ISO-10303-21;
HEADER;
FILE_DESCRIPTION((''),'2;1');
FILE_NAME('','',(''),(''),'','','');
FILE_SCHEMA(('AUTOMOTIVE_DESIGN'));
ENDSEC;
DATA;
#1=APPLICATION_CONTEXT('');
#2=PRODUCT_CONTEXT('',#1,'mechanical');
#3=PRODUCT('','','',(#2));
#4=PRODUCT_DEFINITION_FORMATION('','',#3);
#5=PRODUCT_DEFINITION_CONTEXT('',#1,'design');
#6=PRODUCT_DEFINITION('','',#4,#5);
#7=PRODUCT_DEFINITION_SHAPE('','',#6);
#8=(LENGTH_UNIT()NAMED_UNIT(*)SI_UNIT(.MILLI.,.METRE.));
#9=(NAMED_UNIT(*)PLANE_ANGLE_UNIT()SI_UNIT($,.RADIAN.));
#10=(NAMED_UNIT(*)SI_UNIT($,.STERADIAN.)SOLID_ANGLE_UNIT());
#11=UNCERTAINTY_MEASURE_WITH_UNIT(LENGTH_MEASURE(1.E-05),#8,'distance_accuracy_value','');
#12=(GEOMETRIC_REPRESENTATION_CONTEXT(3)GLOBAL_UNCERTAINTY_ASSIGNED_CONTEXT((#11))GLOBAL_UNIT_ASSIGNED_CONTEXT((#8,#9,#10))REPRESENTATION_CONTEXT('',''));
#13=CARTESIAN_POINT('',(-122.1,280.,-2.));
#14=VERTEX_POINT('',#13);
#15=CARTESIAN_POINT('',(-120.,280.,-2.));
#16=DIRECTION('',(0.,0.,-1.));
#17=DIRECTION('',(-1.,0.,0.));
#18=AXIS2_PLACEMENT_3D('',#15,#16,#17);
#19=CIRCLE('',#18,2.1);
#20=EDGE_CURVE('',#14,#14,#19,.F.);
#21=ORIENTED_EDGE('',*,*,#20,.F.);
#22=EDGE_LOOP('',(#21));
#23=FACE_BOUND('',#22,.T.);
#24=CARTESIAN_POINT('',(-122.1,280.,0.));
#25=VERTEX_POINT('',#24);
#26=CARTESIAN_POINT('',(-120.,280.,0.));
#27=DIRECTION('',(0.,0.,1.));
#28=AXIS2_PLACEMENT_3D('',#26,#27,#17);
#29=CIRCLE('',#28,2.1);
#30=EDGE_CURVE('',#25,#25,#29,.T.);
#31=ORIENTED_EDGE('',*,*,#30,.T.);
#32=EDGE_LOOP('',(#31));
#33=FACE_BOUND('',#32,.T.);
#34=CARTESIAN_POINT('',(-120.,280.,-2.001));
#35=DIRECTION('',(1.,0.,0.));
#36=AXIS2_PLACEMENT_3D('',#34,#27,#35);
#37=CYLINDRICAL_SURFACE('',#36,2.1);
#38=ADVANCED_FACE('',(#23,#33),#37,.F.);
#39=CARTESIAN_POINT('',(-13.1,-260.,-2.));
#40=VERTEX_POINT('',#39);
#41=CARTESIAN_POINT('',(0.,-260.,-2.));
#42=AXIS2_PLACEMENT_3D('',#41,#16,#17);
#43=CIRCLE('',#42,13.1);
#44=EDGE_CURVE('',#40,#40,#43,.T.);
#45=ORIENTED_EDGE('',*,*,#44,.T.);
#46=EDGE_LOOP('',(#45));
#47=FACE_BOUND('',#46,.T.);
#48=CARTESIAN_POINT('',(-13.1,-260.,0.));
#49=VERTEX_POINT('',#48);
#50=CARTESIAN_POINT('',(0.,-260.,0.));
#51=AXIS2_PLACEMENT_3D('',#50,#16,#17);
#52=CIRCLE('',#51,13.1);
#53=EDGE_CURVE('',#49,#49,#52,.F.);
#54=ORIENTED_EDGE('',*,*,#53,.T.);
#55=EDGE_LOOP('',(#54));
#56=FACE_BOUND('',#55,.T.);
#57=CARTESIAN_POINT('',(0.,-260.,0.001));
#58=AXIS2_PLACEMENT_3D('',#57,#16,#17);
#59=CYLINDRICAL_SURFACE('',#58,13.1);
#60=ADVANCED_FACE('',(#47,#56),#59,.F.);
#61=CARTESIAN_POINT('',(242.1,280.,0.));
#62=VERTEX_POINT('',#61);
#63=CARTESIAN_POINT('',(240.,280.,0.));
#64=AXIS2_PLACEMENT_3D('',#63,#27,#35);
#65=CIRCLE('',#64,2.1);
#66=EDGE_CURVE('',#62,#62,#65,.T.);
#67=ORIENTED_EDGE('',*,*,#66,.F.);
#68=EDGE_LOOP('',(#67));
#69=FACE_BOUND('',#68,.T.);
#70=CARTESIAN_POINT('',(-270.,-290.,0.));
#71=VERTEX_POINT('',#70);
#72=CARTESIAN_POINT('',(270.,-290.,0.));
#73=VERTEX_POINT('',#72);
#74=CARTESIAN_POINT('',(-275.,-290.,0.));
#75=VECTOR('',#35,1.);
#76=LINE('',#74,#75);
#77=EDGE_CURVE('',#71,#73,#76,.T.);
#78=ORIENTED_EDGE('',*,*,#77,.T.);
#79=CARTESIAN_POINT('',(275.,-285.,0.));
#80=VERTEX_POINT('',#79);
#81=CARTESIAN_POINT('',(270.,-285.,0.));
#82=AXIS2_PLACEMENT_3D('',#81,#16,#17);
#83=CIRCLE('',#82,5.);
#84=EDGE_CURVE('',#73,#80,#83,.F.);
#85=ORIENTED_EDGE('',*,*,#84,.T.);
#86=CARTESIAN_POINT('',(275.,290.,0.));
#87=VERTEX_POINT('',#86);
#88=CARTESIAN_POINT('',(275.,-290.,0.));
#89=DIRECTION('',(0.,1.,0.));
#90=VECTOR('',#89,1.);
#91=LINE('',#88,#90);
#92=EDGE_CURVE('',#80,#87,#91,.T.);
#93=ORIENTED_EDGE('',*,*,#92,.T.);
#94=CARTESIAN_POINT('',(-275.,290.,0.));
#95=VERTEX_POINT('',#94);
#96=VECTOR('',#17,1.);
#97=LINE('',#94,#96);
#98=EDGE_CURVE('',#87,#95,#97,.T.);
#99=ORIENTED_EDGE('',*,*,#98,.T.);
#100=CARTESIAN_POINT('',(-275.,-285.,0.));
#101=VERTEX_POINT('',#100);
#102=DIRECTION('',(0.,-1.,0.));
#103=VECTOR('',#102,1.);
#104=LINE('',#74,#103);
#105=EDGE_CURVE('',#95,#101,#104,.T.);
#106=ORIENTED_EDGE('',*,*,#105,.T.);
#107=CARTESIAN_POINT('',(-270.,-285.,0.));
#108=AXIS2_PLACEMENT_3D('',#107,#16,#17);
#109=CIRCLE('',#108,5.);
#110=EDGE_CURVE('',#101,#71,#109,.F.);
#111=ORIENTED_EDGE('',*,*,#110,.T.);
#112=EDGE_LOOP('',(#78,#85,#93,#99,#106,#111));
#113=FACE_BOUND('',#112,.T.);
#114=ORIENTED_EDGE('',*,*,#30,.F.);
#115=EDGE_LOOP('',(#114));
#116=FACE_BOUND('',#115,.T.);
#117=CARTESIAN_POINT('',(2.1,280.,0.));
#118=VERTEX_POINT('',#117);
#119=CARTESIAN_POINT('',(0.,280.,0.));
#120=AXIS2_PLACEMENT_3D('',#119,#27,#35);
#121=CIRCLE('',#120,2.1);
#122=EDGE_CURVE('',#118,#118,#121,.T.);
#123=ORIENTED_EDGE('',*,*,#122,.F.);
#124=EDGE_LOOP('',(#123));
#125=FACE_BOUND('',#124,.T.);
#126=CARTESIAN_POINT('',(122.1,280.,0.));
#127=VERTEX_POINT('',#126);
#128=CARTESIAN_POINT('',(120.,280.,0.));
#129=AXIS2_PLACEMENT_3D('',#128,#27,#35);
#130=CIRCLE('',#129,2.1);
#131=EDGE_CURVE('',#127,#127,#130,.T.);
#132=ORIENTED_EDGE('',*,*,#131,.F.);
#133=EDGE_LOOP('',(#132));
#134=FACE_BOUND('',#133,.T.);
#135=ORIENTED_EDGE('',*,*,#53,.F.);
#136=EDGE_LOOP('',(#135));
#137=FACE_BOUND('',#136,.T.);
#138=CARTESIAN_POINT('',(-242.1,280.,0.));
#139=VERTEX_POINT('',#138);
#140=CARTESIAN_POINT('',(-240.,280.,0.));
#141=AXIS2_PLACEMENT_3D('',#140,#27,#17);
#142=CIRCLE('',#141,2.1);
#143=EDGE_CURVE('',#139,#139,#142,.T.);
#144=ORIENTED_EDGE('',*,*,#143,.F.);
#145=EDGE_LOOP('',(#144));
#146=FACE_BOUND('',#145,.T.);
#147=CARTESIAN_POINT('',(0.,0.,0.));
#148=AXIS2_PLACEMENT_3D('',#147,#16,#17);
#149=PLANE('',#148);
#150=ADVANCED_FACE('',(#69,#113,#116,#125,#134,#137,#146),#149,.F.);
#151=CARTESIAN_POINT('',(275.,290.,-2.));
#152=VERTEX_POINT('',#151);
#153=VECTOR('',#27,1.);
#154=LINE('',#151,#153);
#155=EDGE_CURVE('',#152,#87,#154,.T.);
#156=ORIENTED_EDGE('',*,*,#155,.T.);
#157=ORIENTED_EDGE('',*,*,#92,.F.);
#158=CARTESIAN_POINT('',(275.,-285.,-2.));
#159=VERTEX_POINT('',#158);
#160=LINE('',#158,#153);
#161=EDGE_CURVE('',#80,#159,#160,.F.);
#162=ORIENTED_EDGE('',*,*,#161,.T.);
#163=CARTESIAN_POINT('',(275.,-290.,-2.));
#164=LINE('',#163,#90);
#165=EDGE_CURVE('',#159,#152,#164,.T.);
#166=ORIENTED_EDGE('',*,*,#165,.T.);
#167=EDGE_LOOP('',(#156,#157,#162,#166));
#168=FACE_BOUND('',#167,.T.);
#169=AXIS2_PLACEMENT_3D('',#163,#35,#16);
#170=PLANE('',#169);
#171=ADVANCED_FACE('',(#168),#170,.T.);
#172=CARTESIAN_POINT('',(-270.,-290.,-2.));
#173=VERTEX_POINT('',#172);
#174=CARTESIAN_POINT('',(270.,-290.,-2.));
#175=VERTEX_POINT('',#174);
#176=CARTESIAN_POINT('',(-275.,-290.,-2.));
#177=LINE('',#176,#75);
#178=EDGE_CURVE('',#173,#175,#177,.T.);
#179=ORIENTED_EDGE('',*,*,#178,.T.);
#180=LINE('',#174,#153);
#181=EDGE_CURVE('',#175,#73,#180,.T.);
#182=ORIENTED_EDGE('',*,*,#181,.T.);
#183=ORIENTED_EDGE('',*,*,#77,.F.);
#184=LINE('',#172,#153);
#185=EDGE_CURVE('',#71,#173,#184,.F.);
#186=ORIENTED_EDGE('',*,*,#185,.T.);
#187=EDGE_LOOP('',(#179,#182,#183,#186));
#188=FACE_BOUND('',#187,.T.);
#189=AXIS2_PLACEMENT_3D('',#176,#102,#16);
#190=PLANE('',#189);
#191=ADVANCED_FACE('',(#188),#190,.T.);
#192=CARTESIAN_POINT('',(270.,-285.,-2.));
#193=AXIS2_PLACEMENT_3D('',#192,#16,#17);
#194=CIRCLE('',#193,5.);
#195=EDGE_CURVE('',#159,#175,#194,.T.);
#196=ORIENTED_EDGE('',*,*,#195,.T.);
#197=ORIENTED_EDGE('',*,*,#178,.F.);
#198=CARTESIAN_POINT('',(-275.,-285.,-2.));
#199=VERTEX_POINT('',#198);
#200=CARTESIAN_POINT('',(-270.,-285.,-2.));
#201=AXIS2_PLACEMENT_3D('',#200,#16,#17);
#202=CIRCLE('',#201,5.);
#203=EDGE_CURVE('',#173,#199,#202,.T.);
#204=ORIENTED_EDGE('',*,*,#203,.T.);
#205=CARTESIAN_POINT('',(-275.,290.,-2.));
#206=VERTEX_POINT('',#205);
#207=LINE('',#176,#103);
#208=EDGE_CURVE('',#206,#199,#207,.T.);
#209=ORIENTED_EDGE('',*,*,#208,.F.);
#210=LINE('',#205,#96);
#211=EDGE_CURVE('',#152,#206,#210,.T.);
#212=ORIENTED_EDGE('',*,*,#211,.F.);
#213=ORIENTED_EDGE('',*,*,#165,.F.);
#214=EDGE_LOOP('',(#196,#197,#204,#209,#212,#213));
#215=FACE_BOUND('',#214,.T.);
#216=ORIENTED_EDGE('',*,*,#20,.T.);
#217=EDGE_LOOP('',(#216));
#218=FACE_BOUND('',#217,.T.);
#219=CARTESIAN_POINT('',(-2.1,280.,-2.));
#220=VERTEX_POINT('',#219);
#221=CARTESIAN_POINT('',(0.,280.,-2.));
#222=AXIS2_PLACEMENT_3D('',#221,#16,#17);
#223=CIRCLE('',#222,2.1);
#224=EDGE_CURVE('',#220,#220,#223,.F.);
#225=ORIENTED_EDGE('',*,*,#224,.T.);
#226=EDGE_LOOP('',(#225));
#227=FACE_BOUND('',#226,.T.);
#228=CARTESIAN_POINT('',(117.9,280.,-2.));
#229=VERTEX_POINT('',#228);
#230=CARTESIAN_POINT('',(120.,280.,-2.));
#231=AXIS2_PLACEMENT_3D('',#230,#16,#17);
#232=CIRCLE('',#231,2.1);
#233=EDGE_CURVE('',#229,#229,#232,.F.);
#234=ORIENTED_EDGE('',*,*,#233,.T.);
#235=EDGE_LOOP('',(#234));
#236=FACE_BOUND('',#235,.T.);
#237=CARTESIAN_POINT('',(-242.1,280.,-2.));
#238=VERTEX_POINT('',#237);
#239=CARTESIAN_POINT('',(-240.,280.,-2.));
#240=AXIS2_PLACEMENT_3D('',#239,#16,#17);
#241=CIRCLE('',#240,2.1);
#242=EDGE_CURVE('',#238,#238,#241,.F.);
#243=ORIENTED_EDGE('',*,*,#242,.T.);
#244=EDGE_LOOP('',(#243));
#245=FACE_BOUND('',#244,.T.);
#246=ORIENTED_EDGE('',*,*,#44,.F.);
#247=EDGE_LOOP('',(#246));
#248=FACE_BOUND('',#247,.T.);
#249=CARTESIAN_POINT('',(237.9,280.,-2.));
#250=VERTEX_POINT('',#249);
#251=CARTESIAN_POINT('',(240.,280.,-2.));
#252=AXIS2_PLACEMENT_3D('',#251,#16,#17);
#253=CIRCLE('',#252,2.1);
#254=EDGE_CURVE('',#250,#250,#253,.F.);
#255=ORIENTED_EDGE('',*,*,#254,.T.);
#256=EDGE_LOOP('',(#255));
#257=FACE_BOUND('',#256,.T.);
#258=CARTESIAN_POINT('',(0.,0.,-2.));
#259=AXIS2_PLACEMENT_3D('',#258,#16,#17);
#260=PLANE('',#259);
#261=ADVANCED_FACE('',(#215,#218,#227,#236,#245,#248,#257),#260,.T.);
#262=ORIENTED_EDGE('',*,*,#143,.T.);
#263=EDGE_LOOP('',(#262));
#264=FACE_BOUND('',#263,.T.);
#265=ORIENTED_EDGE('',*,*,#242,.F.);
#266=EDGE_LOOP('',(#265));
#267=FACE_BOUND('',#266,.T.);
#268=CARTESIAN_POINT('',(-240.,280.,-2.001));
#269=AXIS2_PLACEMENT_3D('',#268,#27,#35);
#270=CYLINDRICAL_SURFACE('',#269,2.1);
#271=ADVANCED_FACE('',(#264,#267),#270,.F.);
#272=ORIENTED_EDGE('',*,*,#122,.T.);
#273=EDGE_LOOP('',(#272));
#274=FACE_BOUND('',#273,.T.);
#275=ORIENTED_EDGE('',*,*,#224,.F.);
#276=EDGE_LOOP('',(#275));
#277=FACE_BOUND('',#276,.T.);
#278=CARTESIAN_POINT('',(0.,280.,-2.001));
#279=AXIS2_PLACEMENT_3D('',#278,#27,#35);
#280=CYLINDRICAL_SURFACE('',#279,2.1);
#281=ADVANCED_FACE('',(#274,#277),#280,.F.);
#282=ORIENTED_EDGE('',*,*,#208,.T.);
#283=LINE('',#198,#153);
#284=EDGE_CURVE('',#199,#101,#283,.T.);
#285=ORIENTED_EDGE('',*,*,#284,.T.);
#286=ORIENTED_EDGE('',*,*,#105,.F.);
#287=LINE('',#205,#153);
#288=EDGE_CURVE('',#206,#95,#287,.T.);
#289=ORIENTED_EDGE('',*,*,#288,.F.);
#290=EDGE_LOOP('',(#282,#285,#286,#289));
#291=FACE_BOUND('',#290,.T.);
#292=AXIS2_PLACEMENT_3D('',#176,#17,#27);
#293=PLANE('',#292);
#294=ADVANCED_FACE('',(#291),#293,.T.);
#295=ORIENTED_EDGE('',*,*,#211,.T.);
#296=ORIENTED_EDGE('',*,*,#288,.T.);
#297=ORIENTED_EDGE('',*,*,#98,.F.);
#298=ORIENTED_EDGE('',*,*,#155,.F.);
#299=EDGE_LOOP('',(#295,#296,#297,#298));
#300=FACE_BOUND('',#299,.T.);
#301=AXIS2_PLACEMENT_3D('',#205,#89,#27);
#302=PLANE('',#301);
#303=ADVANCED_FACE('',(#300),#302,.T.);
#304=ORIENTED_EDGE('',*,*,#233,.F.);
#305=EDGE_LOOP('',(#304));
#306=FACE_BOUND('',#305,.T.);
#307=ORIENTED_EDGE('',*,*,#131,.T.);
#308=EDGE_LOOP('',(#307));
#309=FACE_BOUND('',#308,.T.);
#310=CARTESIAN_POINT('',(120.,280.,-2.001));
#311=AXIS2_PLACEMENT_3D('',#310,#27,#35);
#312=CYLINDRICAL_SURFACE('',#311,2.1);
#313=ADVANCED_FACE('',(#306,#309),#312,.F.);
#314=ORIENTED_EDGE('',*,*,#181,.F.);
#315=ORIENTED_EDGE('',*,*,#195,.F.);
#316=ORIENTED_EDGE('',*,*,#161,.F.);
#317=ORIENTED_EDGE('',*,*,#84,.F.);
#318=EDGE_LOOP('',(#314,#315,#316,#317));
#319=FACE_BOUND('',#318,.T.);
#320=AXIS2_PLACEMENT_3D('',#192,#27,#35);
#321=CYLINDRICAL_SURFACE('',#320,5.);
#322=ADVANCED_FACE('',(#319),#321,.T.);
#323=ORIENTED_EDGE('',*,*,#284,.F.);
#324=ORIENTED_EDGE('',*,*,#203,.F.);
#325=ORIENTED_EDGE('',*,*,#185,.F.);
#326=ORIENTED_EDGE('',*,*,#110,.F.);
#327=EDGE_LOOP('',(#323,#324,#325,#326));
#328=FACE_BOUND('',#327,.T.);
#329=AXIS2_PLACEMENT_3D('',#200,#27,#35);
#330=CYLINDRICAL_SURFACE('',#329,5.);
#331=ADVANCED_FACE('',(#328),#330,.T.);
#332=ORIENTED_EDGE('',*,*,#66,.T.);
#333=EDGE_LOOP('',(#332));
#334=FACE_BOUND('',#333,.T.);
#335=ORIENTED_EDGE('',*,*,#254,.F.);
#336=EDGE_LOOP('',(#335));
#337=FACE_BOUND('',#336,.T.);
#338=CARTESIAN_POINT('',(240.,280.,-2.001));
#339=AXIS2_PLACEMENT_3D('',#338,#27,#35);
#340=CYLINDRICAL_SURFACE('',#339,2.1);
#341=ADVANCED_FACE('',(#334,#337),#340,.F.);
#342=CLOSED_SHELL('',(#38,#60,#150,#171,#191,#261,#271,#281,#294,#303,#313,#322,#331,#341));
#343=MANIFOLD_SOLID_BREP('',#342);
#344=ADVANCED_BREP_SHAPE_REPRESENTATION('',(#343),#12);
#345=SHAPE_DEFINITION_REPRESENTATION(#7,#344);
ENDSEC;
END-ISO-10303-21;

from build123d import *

# Parameters (mm, degrees)
SZKIC1_W                   = 550
SZKIC1_H                   = 580
ODGI_CIE_BAZOWE1_DEPTH     = 2
ZAOKR_GLENIE1_R            = 5
WYTNIJ_WYCI_GNI_CIE2_REACH = 401.661
SZKIC3_R                   = 2.1
WYTNIJ_WYCI_GNI_CIE3_REACH = 401.661
SZKIC4_R                   = 13.1


# Sheet-metal steps are written as plain solids
with BuildPart() as part:
    # Szkic1 → Odgięcie bazowe1 (new body)
    with BuildSketch(Plane.XY):
        Rectangle(SZKIC1_W, SZKIC1_H)
    extrude(amount=-ODGI_CIE_BAZOWE1_DEPTH)

    # Zaokrąglenie1
    zaokr_glenie1_edges = [part.edges().sort_by_distance(p)[0] for p in [
        (275, -290, -1),
        (-275, -290, -1),
    ]]
    fillet(zaokr_glenie1_edges, radius=ZAOKR_GLENIE1_R)

    # Szkic3 → Wytnij-wyciągnięcie2 (cut, up to next)
    with BuildSketch(Plane.XY, mode=Mode.PRIVATE) as wytnij_wyci_gni_cie2_sk1:
        with Locations((0, 280)):
            Circle(SZKIC3_R)
    wytnij_wyci_gni_cie2_tool1 = extrude(wytnij_wyci_gni_cie2_sk1.sketch, amount=-WYTNIJ_WYCI_GNI_CIE2_REACH, mode=Mode.PRIVATE) & part.part
    # Szkic3 → Wytnij-wyciągnięcie2 (cut, up to next)
    with BuildSketch(Plane.XY, mode=Mode.PRIVATE) as wytnij_wyci_gni_cie2_sk2:
        with Locations((120, 280)):
            Circle(SZKIC3_R)
    wytnij_wyci_gni_cie2_tool2 = extrude(wytnij_wyci_gni_cie2_sk2.sketch, amount=-WYTNIJ_WYCI_GNI_CIE2_REACH, mode=Mode.PRIVATE) & part.part
    # Szkic3 → Wytnij-wyciągnięcie2 (cut, up to next)
    with BuildSketch(Plane.XY, mode=Mode.PRIVATE) as wytnij_wyci_gni_cie2_sk3:
        with Locations((240, 280)):
            Circle(SZKIC3_R)
    wytnij_wyci_gni_cie2_tool3 = extrude(wytnij_wyci_gni_cie2_sk3.sketch, amount=-WYTNIJ_WYCI_GNI_CIE2_REACH, mode=Mode.PRIVATE) & part.part
    # Szkic3 → Wytnij-wyciągnięcie2 (cut, up to next)
    with BuildSketch(Plane.XY, mode=Mode.PRIVATE) as wytnij_wyci_gni_cie2_sk4:
        with Locations(Location((-240, 280, 0), (0, 0, 180))):
            Circle(SZKIC3_R)
    wytnij_wyci_gni_cie2_tool4 = extrude(wytnij_wyci_gni_cie2_sk4.sketch, amount=-WYTNIJ_WYCI_GNI_CIE2_REACH, mode=Mode.PRIVATE) & part.part
    # Szkic3 → Wytnij-wyciągnięcie2 (cut, up to next)
    with BuildSketch(Plane.XY, mode=Mode.PRIVATE) as wytnij_wyci_gni_cie2_sk5:
        with Locations(Location((-120, 280, 0), (0, 0, 180))):
            Circle(SZKIC3_R)
    wytnij_wyci_gni_cie2_tool5 = extrude(wytnij_wyci_gni_cie2_sk5.sketch, amount=-WYTNIJ_WYCI_GNI_CIE2_REACH, mode=Mode.PRIVATE) & part.part
    add(wytnij_wyci_gni_cie2_tool1.solids().sort_by_distance((0, 280, 0))[0], mode=Mode.SUBTRACT)
    add(wytnij_wyci_gni_cie2_tool2.solids().sort_by_distance((120, 280, 0))[0], mode=Mode.SUBTRACT)
    add(wytnij_wyci_gni_cie2_tool3.solids().sort_by_distance((240, 280, 0))[0], mode=Mode.SUBTRACT)
    add(wytnij_wyci_gni_cie2_tool4.solids().sort_by_distance((-240, 280, 0))[0], mode=Mode.SUBTRACT)
    add(wytnij_wyci_gni_cie2_tool5.solids().sort_by_distance((-120, 280, 0))[0], mode=Mode.SUBTRACT)

    # Szkic4 → Wytnij-wyciągnięcie3 (cut, up to next)
    with BuildSketch(Plane(origin=(0, 0, -2), x_dir=(-1, 0, 0), z_dir=(0, 0, -1)), mode=Mode.PRIVATE) as wytnij_wyci_gni_cie3_sk1:
        with Locations((0, -260)):
            Circle(SZKIC4_R)
    wytnij_wyci_gni_cie3_tool1 = extrude(wytnij_wyci_gni_cie3_sk1.sketch, amount=-WYTNIJ_WYCI_GNI_CIE3_REACH, mode=Mode.PRIVATE) & part.part
    add(wytnij_wyci_gni_cie3_tool1.solids().sort_by_distance((0, -260, -2))[0], mode=Mode.SUBTRACT)


solid = part.part
